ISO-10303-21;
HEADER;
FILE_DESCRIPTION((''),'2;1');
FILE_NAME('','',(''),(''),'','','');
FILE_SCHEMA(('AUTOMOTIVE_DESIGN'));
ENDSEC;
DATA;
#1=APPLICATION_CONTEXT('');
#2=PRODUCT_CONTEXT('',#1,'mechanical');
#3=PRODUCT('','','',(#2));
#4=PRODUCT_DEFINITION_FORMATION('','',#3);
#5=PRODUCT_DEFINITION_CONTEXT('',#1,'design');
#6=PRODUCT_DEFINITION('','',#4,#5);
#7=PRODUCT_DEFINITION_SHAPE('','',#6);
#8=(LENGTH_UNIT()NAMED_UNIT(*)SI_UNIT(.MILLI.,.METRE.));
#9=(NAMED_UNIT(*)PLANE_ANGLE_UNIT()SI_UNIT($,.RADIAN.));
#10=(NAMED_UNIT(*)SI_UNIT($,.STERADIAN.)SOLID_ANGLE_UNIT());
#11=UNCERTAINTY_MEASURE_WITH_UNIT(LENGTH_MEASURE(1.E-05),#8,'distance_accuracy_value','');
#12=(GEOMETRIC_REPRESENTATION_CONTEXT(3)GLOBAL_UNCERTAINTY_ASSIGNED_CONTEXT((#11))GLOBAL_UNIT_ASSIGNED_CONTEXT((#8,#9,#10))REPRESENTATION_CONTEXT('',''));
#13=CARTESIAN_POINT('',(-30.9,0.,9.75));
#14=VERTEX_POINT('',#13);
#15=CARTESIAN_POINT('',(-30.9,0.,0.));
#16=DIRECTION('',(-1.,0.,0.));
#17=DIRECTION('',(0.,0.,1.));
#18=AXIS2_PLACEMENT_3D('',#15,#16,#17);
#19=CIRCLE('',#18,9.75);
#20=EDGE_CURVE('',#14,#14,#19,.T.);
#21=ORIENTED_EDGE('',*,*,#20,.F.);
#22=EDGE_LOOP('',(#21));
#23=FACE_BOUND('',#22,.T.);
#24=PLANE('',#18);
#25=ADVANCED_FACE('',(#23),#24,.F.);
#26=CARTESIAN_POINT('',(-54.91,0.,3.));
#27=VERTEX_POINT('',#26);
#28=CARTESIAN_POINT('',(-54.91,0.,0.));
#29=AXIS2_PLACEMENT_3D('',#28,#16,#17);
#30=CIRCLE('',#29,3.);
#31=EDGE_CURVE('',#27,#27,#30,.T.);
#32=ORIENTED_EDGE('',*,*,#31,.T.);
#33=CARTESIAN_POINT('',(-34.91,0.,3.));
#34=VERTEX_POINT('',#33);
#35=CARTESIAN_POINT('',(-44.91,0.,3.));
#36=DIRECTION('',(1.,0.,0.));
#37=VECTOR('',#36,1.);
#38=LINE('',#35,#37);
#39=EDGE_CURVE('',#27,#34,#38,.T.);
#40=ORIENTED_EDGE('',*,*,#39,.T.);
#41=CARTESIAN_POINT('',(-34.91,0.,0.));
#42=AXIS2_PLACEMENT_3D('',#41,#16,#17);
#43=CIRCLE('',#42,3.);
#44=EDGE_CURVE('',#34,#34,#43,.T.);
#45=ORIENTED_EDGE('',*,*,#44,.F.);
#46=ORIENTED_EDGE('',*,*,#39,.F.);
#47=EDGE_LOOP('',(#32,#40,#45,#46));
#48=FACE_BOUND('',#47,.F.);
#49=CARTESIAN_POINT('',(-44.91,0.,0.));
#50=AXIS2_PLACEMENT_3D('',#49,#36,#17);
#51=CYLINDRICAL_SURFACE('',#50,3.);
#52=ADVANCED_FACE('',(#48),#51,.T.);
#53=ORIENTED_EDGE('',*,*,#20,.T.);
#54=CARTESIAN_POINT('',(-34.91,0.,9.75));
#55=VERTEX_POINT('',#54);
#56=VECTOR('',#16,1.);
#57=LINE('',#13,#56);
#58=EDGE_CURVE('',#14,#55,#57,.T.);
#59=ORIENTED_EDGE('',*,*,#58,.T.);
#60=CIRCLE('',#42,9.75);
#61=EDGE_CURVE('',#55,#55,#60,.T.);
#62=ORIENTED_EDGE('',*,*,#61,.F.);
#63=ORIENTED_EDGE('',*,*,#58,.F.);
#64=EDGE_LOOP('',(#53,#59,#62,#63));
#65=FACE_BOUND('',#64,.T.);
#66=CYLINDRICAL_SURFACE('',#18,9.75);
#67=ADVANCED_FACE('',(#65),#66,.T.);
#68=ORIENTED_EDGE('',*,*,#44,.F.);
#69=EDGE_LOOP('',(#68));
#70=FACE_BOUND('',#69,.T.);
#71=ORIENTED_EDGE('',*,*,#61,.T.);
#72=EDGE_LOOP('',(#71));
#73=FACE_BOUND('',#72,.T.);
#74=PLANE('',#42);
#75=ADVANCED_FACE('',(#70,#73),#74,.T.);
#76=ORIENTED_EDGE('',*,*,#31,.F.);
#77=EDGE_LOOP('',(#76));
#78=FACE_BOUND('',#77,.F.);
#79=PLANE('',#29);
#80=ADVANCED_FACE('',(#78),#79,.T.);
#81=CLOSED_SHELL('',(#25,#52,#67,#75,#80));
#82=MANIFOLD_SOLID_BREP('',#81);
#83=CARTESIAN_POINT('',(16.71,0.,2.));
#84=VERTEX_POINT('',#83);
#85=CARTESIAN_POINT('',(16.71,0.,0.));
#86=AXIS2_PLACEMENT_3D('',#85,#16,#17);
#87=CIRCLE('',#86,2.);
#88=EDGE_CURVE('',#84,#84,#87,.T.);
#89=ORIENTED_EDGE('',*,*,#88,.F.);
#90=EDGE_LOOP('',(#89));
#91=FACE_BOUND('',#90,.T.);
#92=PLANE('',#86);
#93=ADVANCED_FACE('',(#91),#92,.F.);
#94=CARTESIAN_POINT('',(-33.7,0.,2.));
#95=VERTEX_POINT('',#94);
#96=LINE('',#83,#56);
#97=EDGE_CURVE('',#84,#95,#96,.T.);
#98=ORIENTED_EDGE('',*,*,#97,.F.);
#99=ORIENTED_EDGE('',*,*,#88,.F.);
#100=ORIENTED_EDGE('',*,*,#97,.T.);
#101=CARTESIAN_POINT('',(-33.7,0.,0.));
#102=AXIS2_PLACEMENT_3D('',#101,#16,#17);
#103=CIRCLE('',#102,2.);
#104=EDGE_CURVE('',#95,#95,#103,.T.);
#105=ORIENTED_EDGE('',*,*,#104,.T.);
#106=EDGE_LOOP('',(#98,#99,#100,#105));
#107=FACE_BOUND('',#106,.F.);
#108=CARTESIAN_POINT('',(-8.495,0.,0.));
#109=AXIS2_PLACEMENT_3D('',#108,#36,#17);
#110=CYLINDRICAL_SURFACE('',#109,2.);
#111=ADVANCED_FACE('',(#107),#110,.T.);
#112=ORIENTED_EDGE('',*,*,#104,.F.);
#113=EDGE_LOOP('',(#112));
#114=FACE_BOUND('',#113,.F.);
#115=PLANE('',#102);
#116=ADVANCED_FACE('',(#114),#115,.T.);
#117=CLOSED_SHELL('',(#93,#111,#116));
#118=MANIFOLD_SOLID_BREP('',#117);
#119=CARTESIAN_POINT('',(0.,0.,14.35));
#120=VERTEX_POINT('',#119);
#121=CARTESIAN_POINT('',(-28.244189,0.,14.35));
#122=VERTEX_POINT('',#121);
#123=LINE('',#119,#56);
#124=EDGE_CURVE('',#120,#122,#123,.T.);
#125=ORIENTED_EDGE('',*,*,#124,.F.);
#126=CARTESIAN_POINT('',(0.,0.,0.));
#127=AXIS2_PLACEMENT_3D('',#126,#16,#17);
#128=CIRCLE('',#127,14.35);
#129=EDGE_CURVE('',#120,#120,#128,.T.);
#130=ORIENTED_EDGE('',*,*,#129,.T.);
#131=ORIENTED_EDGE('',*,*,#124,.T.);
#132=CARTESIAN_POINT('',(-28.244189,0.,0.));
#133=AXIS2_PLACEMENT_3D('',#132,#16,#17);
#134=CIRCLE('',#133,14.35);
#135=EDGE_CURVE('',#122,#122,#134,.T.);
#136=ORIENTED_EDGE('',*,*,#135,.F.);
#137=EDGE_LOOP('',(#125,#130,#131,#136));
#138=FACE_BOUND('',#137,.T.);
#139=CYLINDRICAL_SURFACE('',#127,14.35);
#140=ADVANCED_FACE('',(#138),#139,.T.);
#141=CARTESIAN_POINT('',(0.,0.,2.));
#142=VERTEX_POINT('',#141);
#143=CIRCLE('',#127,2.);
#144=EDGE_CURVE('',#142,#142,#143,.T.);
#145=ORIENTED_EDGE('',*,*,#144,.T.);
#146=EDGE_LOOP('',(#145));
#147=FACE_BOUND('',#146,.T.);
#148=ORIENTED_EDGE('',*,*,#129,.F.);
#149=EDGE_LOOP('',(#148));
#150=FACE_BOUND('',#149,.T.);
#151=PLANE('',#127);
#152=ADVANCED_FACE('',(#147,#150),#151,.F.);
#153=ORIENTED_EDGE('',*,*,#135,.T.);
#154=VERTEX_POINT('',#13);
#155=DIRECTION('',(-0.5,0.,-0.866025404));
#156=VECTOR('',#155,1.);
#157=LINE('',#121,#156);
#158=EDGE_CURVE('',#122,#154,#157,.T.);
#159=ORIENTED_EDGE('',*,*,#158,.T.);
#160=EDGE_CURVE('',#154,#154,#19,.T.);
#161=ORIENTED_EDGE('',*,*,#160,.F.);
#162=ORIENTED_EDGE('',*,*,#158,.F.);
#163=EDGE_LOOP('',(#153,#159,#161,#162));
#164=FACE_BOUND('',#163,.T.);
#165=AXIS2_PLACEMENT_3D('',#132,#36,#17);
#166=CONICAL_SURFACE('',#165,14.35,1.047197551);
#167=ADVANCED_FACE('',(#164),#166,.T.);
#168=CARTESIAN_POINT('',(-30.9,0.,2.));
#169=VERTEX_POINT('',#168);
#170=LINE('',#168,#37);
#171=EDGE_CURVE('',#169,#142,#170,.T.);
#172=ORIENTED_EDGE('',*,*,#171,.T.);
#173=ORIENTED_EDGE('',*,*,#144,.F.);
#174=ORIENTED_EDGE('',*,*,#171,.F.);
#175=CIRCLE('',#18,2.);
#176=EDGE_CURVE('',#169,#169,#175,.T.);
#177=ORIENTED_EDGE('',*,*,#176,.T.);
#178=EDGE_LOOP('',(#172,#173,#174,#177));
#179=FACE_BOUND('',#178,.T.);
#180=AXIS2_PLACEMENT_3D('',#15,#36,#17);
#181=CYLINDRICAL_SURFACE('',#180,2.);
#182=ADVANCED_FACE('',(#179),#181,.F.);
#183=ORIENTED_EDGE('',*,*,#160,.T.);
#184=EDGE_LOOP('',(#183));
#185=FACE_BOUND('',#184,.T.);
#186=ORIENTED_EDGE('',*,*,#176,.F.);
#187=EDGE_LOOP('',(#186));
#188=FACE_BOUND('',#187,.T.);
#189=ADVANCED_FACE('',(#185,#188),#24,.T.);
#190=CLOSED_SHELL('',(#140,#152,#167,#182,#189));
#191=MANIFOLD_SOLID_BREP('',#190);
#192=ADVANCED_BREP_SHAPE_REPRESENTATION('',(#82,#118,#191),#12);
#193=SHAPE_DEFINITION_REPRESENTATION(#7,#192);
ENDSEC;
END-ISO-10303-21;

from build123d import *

# Parameters (mm, degrees)
F1_W = 16.71
F1_H = 2
F2_W = 50.41
F2_H = 2
F3_W = 20
F3_H = 3


with BuildPart() as f4:
    # F1 (on Front) → F4 (revolve)
    with BuildSketch(Plane.XZ):
        with Locations((8.355, 1)):
            Rectangle(F1_W, F1_H)
    revolve(axis=Axis((-19.1, 0, 0), (-1, 0, 0)))

    # F2 (on Front) → F5 (revolve)
    with BuildSketch(Plane.XZ):
        with Locations((-8.495, 1)):
            Rectangle(F2_W, F2_H)
    revolve(axis=Axis((-19.1, 0, 0), (-1, 0, 0)))


with BuildPart() as f4b:
    # F1 (on Front) → F4, piece 2 (revolve)
    with BuildSketch(Plane.XZ):
        Polygon((0, 14.35), (-28.2441887617, 14.35), (-30.9, 9.75), (-30.9, 2), (0, 2), align=None)
    revolve(axis=Axis((-19.1, 0, 0), (-1, 0, 0)))


with BuildPart() as f6:
    # F3 (on Front) → F6 (revolve)
    with BuildSketch(Plane.XZ):
        with Locations((-44.91, 1.5)):
            Rectangle(F3_W, F3_H)
        Polygon((-30.9, 9.75), (-34.91, 9.75), (-34.91, 3), (-34.91, 0), (-30.9, 0), align=None)
    revolve(axis=Axis((-19.1, 0, 0), (-1, 0, 0)))


solid = Compound([f4.part, f4b.part, f6.part])
